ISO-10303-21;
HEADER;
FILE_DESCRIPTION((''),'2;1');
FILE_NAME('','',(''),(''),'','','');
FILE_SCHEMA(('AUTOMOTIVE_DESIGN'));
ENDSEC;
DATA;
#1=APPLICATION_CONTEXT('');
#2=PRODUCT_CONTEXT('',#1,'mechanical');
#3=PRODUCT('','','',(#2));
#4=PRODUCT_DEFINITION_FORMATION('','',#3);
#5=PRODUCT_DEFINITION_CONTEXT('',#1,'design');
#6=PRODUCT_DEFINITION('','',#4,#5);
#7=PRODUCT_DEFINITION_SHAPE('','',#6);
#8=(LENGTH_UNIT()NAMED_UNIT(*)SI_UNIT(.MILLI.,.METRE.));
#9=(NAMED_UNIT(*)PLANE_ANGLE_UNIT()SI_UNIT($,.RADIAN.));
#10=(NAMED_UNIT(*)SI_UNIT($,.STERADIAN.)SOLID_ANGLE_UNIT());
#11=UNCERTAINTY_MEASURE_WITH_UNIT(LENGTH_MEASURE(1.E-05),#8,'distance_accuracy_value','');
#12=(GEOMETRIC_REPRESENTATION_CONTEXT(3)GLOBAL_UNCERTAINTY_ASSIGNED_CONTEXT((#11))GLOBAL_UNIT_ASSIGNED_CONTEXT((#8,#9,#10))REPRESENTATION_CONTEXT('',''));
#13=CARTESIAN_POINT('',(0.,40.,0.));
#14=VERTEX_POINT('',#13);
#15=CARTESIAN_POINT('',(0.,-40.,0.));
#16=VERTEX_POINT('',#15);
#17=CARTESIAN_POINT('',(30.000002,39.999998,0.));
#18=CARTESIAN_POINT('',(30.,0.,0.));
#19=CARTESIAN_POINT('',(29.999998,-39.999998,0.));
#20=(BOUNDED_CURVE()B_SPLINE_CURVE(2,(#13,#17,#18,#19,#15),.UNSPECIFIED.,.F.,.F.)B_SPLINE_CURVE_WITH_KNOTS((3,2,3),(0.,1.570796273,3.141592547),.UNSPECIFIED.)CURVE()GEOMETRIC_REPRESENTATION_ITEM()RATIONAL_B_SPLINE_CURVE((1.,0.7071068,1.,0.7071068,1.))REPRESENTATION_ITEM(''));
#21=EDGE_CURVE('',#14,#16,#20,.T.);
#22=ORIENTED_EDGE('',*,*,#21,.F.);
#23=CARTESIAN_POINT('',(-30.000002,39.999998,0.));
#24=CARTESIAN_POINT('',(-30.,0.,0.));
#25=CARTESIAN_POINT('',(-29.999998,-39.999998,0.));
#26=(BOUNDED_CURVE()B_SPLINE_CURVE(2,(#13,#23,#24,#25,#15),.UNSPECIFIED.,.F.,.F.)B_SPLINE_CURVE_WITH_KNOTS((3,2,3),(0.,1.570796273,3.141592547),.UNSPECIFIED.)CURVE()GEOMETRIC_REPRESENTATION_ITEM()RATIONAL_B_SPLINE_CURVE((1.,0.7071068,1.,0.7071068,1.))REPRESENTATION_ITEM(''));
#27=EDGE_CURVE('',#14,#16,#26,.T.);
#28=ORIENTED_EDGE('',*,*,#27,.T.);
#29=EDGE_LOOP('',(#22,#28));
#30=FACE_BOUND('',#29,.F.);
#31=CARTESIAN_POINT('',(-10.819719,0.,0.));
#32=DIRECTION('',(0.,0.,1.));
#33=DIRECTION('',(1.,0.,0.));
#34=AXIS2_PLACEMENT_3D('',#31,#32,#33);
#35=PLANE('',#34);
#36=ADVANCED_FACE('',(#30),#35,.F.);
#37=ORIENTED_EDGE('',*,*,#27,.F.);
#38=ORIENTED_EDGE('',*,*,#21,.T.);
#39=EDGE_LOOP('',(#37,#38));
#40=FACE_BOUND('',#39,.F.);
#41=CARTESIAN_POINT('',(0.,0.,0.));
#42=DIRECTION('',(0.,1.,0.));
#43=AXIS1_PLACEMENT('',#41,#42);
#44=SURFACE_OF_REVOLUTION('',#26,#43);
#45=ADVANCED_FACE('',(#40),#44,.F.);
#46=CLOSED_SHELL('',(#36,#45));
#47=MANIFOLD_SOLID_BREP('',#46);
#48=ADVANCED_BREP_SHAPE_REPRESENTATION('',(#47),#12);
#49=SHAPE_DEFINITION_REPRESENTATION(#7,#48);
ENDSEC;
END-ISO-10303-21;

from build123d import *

# Parameters (mm, degrees)
F1_ANGLE = 180


# Not quite as in the source:
# - ends of sketch curves that miss each other by under 0.0002 mm in the source are joined


with BuildPart() as f1:
    # F0 (on Top) → F1 (revolve)
    with BuildSketch(Plane.XY):
        with BuildLine():
            Line((0, -40), (0, 40))
            add(Edge.make_bspline(
                [(0, 40), (-30.000001606, 39.999997591), (-30, -2.677e-07), (-29.999998394, -39.9999981263), (0, -40)],
                knots=[0, 0, 0, 1.5707962733, 1.5707962733, 3.1415925465, 3.1415925465, 3.1415925465], degree=2, weights=[1, 0.7071068001, 1, 0.7071068001, 1]))
        make_face()
    revolve(axis=Axis((0, 0, 0), (0, 1, 0)), revolution_arc=F1_ANGLE)


solid = f1.part
